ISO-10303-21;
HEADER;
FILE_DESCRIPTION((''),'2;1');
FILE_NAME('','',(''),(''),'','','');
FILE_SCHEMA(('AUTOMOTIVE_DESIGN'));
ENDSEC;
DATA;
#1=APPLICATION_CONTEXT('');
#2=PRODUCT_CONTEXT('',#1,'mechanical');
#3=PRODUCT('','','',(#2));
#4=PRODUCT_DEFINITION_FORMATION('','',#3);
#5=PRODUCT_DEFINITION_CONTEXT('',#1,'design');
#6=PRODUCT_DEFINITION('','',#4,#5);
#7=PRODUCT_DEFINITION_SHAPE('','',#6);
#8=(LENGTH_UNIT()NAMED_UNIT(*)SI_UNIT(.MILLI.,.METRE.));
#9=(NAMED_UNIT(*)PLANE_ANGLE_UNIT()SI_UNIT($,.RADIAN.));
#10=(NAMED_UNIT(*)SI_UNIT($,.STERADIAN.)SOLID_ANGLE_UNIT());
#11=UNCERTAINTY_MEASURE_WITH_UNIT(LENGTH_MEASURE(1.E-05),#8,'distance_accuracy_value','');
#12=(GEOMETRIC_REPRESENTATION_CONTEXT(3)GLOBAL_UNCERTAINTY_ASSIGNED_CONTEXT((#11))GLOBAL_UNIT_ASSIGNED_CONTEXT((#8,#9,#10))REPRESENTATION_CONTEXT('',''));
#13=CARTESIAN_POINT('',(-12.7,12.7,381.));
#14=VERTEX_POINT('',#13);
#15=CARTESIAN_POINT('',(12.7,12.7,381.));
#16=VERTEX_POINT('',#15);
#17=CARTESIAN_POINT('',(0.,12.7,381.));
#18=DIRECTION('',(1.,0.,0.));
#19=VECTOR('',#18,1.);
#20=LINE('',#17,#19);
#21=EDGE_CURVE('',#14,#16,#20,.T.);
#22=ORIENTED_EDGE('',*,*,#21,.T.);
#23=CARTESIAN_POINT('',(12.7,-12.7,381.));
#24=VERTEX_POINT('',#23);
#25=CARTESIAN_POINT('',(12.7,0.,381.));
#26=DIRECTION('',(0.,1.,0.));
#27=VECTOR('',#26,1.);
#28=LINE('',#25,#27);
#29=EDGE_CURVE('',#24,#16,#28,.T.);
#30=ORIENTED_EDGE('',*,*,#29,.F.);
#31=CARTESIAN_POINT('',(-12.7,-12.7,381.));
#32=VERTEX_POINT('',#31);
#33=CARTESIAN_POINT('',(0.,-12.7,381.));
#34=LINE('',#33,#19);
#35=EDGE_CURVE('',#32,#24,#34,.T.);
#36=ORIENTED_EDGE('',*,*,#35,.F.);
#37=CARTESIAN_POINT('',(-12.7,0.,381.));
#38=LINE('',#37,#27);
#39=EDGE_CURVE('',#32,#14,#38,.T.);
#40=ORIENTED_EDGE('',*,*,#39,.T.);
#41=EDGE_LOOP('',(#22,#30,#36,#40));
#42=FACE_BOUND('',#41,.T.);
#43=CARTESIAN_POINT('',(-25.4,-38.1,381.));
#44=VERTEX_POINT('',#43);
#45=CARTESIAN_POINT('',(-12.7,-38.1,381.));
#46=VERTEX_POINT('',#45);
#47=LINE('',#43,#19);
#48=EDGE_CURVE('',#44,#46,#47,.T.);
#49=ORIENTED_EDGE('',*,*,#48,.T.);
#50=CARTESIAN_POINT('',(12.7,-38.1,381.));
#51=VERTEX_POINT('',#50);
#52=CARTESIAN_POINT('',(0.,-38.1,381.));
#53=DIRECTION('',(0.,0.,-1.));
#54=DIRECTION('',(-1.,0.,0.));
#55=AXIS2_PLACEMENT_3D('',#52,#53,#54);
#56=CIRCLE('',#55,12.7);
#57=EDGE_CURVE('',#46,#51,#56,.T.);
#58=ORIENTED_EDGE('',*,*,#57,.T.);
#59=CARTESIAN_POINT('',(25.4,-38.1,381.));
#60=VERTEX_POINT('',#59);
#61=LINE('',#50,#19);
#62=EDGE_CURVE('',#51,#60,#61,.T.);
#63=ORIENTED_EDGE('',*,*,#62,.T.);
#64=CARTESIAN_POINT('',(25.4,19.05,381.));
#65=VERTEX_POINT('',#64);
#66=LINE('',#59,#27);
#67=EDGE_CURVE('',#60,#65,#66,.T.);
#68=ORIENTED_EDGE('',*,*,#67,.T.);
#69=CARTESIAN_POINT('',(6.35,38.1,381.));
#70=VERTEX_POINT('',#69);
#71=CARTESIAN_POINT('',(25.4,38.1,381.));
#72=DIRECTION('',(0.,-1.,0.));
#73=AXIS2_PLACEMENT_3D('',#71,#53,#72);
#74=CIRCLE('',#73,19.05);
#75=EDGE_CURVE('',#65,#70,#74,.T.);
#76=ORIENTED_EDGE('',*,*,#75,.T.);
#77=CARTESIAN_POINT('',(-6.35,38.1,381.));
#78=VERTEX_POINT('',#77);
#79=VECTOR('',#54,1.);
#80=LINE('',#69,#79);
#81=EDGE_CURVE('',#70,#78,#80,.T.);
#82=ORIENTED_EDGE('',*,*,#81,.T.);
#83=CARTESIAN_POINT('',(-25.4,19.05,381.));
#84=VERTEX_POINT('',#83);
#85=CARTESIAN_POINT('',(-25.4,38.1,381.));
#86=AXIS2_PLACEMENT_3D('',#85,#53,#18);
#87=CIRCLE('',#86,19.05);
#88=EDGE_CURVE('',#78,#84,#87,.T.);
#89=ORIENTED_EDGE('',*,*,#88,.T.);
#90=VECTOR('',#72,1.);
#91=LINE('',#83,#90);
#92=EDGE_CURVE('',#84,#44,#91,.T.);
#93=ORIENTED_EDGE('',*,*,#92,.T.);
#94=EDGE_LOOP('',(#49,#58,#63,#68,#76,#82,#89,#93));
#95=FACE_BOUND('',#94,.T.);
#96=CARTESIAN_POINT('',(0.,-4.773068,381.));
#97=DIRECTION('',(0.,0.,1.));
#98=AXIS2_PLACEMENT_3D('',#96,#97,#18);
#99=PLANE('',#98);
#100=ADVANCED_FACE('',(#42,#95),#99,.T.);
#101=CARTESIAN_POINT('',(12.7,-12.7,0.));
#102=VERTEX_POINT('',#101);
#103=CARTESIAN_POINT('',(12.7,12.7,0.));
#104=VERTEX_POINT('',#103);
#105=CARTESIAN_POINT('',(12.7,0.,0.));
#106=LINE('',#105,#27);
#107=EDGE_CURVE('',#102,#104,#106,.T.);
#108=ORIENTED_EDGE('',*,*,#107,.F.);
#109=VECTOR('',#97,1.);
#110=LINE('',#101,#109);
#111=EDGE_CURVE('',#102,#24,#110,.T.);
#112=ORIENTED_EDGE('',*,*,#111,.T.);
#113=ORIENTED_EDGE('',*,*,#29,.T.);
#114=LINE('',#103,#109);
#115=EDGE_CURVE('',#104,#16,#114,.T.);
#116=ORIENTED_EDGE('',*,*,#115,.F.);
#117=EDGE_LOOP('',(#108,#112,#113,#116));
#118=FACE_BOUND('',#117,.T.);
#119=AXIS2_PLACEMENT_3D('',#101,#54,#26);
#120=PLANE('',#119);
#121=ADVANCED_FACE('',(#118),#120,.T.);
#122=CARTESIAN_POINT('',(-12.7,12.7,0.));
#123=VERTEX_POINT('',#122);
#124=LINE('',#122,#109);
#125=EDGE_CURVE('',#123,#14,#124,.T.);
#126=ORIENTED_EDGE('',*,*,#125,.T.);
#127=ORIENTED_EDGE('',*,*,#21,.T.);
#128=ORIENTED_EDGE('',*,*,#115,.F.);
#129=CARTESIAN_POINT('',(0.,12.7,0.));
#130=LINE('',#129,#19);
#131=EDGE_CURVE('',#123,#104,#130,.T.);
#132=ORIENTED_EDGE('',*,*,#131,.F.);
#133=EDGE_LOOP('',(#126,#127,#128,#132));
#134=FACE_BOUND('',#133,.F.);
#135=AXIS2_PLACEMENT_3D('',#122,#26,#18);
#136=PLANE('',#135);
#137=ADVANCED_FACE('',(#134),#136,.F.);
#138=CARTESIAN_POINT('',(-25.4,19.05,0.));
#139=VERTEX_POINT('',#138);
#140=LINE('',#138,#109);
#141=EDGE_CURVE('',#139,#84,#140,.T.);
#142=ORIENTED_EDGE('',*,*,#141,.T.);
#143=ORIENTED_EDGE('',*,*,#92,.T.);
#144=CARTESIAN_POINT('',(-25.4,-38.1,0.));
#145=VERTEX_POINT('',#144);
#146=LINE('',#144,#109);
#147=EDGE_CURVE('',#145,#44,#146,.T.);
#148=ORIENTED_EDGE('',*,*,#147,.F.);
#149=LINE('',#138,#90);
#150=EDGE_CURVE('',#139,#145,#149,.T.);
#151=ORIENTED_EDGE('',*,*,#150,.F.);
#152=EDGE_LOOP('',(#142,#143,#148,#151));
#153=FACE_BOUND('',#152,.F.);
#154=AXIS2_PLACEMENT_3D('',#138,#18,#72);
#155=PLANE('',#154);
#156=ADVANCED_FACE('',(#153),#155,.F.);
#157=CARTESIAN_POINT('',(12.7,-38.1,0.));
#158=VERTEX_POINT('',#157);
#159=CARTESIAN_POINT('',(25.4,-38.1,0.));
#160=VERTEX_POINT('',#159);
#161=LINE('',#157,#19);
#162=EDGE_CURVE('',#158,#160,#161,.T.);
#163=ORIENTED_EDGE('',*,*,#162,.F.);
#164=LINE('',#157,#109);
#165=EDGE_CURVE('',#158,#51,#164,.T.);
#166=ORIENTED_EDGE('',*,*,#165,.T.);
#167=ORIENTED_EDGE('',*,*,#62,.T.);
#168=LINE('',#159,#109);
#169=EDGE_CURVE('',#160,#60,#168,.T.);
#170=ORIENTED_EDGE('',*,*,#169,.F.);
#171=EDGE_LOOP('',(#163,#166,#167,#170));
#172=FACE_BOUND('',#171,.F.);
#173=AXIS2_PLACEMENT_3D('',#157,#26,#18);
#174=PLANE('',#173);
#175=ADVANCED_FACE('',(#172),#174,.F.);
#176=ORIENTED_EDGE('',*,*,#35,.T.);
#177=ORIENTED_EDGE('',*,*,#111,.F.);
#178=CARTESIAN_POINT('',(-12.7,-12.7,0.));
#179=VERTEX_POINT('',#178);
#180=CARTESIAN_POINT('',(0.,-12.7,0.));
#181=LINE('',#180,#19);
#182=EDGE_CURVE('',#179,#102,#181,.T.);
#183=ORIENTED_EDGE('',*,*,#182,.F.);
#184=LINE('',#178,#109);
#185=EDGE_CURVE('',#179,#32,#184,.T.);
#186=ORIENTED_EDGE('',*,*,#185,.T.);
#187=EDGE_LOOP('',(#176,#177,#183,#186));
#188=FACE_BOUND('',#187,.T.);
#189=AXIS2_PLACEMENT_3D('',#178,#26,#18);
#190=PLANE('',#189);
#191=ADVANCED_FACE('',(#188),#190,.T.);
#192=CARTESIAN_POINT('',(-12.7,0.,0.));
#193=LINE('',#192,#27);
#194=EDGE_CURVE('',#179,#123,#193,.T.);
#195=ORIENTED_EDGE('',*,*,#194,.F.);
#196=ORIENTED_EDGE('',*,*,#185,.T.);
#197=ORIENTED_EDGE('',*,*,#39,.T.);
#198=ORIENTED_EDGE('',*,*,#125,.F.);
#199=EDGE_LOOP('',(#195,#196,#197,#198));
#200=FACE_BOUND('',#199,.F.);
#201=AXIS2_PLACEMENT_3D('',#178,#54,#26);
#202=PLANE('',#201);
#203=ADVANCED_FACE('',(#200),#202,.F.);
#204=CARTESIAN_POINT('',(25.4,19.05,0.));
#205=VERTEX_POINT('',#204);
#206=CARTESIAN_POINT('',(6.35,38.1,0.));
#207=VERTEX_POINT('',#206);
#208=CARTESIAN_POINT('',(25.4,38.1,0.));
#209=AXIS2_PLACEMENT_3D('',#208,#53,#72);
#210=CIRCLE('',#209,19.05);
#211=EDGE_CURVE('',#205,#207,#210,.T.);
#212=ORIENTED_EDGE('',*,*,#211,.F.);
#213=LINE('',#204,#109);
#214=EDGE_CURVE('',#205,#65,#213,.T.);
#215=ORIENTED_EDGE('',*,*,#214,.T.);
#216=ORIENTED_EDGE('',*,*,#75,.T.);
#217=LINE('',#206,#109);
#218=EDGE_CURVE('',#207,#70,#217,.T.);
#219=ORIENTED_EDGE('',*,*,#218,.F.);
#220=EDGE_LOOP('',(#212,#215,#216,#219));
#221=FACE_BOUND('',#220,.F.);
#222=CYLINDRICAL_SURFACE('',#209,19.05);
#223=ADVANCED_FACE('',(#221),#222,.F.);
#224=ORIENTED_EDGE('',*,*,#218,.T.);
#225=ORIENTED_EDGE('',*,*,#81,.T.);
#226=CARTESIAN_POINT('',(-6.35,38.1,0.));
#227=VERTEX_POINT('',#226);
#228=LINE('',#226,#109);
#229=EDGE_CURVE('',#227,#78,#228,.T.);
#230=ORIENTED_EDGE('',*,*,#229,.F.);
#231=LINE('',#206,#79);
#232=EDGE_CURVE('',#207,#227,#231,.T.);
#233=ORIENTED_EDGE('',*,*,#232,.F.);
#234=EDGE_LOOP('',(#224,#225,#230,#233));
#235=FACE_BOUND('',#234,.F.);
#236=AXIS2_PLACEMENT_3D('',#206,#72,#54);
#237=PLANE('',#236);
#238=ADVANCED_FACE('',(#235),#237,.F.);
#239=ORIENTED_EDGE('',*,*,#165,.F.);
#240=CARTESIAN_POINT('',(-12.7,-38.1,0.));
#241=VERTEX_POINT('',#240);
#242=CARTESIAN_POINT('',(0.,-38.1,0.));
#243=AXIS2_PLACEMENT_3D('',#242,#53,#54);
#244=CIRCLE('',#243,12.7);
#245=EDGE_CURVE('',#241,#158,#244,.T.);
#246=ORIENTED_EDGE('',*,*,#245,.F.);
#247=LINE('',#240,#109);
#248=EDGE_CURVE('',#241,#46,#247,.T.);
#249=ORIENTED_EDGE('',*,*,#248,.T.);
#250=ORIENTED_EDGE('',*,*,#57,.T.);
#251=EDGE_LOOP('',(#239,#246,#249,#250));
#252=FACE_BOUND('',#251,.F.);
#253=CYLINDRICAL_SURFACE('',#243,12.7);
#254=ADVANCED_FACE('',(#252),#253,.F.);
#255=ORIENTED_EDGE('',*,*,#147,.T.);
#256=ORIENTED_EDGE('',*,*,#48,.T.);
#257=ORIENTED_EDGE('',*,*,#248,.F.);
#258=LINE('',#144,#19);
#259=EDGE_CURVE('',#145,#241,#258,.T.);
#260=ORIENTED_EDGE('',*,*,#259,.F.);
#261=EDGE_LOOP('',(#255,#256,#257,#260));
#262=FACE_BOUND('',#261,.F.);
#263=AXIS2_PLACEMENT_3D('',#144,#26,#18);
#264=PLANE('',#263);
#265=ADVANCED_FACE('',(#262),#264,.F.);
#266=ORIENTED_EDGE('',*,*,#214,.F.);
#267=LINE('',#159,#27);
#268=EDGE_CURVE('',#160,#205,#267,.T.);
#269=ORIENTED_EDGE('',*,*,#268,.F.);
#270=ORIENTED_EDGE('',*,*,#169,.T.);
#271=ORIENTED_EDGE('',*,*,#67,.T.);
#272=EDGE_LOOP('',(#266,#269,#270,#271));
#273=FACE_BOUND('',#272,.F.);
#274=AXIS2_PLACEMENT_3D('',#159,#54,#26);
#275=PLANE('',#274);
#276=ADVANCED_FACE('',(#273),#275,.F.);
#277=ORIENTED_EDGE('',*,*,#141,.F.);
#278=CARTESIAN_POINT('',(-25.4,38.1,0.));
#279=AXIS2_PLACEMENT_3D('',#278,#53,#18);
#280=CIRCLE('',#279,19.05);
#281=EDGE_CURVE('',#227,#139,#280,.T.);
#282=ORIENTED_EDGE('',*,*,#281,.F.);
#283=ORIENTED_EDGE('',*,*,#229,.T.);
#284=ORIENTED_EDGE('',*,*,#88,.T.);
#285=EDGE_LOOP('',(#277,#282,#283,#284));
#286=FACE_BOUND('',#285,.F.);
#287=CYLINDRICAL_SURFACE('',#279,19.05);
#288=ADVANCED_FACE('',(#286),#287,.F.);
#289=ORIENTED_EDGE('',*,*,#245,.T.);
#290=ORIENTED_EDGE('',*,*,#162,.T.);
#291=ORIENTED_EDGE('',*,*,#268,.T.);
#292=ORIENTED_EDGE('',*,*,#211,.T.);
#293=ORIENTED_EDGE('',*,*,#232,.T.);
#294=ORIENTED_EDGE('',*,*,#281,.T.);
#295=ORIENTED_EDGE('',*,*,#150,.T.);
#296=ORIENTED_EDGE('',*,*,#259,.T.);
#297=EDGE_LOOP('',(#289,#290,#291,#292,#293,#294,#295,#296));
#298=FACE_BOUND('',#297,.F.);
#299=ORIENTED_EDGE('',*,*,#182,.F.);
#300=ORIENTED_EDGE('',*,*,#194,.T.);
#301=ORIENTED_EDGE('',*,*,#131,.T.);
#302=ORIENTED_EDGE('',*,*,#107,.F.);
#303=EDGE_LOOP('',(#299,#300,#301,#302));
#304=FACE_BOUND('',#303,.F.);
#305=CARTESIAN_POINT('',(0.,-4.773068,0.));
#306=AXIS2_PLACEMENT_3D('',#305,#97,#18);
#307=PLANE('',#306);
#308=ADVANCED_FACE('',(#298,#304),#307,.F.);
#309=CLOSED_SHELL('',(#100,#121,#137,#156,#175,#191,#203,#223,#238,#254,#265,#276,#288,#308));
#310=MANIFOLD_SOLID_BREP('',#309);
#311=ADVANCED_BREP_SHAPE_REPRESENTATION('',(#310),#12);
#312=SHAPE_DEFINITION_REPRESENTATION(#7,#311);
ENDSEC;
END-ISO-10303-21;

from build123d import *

# Parameters (mm, degrees)
F1_W     = 25.4
F1_H     = 25.4
F2_DEPTH = 381


# Not quite as in the source:
# - a feature of the source that left no trace in its solid (it failed there, or was rolled back) is left out


with BuildPart() as f2:
    # F1 (on Top) → F2 (new body)
    with BuildSketch(Plane.XY):
        with BuildLine():
            ThreePointArc((25.4, 19.05), (11.9296158184, 24.6296158184), (6.35, 38.1))
            Line((6.35, 38.1), (-6.35, 38.1))
            ThreePointArc((-6.35, 38.1), (-11.9296158184, 24.6296158184), (-25.4, 19.05))
            Line((-25.4, 19.05), (-25.4, -38.1))
            Line((-25.4, -38.1), (-12.7, -38.1))
            ThreePointArc((-12.7, -38.1), (0, -25.4), (12.7, -38.1))
            Line((12.7, -38.1), (25.4, -38.1))
            Line((25.4, -38.1), (25.4, 19.05))
        make_face()
        Rectangle(F1_W, F1_H, mode=Mode.SUBTRACT)
    extrude(amount=F2_DEPTH)


solid = f2.part
